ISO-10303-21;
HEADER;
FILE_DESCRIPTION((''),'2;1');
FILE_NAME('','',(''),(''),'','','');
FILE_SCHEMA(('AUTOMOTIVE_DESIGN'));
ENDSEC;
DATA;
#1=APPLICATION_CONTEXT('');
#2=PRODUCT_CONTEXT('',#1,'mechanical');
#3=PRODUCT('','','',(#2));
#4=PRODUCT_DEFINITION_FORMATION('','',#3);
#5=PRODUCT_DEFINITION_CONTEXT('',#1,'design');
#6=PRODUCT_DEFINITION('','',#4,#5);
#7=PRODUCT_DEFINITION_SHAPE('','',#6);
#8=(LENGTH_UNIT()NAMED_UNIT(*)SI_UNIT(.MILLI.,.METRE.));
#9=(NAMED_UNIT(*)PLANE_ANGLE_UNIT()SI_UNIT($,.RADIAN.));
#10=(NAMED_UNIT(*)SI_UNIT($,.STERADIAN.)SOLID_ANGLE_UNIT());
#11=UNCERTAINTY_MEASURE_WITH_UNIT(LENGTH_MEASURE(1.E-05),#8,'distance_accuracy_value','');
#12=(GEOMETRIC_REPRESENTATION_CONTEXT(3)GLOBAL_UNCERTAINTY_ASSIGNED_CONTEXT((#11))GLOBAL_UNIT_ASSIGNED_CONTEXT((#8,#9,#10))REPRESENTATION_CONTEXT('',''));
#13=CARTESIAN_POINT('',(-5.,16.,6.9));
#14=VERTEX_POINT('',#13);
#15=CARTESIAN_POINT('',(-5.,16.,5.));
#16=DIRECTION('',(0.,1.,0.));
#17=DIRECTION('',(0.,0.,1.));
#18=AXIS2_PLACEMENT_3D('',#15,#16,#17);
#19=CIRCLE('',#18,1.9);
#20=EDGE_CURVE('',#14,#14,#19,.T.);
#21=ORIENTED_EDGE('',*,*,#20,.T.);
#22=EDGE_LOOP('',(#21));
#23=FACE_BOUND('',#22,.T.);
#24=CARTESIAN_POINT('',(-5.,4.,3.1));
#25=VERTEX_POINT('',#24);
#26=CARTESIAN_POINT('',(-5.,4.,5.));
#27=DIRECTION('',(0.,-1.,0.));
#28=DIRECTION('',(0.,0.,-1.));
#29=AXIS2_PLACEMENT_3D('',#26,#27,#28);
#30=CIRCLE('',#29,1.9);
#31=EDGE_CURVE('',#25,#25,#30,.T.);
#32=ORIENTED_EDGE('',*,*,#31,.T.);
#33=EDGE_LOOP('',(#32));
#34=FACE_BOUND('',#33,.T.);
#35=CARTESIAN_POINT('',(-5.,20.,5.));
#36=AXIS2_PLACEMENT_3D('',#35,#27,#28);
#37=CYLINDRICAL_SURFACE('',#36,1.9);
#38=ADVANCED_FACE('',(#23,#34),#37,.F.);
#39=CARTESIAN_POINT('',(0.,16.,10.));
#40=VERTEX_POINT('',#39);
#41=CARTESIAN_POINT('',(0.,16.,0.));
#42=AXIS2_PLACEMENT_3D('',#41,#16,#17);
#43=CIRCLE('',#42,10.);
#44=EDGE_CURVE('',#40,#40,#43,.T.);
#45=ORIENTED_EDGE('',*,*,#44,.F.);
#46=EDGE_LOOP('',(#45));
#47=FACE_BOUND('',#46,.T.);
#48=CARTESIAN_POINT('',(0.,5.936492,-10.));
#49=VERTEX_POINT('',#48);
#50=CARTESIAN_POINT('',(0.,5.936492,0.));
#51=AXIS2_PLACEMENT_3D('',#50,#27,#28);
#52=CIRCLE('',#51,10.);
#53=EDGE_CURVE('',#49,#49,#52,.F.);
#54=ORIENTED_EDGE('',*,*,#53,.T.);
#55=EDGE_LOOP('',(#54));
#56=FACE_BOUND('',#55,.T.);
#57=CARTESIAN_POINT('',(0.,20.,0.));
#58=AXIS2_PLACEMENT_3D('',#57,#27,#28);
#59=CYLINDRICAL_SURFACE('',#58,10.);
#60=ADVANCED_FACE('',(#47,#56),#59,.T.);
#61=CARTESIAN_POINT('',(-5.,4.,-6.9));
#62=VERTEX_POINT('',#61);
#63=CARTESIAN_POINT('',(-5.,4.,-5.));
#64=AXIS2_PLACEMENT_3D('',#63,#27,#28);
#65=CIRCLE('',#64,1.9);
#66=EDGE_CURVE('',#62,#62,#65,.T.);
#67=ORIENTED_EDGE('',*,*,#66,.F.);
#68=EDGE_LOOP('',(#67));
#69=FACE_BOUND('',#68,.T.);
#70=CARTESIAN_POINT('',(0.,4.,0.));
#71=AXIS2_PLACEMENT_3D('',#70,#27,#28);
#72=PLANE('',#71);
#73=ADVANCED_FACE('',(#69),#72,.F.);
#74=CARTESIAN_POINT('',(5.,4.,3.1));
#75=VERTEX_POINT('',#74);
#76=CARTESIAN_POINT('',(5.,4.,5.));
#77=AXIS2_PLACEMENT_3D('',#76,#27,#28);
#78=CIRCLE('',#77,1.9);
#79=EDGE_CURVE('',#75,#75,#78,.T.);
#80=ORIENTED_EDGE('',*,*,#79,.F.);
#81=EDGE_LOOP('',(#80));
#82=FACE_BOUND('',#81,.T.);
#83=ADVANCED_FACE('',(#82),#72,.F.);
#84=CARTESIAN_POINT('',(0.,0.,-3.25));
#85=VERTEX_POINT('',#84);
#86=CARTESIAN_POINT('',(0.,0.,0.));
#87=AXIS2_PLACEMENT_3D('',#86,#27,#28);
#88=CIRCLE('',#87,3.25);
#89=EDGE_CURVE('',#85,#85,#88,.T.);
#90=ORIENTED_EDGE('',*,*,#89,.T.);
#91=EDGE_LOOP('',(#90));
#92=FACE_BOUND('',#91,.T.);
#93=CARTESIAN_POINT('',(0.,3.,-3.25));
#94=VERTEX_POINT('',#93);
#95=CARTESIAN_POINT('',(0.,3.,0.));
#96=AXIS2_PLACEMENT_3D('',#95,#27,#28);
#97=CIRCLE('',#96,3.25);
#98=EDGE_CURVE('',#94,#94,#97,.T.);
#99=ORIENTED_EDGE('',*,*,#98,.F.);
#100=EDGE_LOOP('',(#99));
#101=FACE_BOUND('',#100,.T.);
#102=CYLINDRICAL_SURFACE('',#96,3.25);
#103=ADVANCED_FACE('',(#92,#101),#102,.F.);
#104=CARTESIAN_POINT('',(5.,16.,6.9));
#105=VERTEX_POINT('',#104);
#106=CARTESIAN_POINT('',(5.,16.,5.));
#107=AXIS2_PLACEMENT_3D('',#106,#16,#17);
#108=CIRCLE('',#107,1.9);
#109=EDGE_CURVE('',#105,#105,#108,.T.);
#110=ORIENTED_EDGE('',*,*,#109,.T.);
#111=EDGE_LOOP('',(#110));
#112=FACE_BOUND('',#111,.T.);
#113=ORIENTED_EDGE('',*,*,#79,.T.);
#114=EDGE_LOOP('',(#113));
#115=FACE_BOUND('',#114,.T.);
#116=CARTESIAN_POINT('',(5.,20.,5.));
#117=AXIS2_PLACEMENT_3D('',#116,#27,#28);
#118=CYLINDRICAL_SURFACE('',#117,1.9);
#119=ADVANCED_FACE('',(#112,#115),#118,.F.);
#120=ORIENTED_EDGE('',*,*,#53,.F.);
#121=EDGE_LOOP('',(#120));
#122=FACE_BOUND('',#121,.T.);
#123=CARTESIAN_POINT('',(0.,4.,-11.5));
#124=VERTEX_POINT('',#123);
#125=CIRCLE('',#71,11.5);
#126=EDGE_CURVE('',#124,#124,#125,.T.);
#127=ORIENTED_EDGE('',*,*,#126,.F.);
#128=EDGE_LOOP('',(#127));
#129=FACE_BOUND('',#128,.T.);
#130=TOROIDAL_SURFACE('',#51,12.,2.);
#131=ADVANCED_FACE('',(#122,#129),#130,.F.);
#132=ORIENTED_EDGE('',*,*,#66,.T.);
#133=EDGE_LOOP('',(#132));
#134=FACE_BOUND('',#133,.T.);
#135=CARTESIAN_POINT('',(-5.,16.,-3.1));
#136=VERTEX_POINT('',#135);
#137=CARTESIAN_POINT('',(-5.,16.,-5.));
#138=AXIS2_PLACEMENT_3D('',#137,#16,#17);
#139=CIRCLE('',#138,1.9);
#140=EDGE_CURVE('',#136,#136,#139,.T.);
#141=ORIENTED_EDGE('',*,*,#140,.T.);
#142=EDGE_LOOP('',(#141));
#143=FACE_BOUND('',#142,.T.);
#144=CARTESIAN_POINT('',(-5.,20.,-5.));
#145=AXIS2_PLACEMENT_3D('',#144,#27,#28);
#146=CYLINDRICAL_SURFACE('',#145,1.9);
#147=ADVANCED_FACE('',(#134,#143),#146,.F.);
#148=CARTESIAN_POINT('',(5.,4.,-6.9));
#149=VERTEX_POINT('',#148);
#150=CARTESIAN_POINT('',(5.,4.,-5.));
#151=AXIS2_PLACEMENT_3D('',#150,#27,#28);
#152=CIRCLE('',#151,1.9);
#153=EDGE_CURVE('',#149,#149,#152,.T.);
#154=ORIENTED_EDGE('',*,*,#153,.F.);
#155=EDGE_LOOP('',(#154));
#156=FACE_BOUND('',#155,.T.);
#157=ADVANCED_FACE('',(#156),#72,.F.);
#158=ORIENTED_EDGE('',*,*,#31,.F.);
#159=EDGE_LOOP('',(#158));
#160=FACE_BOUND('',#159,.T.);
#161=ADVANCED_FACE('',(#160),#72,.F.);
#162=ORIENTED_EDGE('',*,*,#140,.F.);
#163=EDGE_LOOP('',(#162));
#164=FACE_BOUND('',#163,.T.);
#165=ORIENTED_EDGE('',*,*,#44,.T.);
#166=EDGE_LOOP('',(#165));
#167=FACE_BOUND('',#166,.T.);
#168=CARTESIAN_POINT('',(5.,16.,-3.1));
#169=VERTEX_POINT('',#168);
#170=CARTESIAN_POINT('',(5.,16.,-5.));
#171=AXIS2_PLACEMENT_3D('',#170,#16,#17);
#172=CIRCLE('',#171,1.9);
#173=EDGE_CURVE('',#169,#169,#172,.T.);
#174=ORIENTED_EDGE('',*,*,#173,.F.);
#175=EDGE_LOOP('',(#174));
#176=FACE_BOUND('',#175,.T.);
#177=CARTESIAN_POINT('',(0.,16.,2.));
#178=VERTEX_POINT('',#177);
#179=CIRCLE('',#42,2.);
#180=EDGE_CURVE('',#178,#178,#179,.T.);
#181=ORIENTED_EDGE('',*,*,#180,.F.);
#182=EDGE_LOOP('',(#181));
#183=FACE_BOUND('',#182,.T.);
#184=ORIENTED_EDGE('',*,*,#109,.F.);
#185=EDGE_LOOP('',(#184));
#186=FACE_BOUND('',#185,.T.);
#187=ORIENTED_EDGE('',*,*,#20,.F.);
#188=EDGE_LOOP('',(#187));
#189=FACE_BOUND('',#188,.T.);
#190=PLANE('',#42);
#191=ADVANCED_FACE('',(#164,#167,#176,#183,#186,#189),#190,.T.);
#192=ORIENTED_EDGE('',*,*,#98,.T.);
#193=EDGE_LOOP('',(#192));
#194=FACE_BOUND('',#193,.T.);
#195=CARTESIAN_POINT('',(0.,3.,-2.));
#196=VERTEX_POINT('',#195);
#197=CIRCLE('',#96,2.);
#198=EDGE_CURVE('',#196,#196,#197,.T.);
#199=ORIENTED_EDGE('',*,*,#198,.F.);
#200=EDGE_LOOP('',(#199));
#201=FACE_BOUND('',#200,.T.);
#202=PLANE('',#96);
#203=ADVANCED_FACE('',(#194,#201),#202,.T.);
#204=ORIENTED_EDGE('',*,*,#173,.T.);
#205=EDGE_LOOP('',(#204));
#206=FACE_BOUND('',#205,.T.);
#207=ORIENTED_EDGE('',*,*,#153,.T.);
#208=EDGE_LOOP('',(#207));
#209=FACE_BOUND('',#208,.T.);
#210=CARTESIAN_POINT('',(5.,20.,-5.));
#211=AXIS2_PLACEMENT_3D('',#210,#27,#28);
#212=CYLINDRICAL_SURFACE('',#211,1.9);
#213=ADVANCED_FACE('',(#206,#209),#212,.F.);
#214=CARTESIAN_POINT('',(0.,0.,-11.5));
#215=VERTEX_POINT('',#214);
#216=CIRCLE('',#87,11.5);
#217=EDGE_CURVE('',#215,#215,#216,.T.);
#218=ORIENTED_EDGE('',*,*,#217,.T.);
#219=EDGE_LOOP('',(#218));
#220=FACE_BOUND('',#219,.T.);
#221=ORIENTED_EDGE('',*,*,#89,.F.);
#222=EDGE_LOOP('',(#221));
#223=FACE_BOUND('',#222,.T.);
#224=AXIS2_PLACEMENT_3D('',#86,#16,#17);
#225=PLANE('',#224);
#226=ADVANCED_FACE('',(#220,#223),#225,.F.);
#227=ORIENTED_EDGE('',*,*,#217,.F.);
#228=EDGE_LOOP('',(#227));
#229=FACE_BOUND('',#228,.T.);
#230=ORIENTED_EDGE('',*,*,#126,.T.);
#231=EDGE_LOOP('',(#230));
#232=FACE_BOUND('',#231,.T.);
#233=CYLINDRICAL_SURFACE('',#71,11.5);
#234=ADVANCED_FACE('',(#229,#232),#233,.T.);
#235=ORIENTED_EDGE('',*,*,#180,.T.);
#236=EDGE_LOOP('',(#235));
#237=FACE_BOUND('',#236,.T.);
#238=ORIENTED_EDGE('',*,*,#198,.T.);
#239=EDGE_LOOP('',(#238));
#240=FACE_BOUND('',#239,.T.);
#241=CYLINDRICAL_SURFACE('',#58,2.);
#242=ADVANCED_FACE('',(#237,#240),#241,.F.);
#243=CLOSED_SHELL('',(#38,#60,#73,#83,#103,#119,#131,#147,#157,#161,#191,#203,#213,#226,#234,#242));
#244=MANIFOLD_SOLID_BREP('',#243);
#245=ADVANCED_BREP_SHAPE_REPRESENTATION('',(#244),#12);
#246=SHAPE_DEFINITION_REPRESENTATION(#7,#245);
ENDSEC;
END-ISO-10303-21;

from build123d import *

# Parameters (mm, degrees)
SKETCH_1_R          = 10
SKETCH_1_R_2        = 1.9
SKETCH_1_R_3        = 2
EXTRUDE_6_DEPTH     = 20
SKETCH_12_R         = 11.5
SKETCH_12_R_2       = 3.1
EXTRUDE_8_DEPTH     = 4
SKETCH_13_R         = 3
CUT_EXTRUDE_7_DEPTH = 2
FILLET_3_R          = 2
CUT_EXTRUDE_START   = -4
SKETCH_14_R         = 10
CUT_EXTRUDE_8_DEPTH = 4
SKETCH_15_R         = 3.25
CUT_EXTRUDE_9_DEPTH = 3


with BuildPart() as part:
    # 草图1 → 凸台-拉伸6 (new body)
    with BuildSketch(Plane(origin=(0, 0, 0), x_dir=(1, 0, 0), z_dir=(0, 1, 0))):
        with Locations(Location((0, 0, 0), (0, 0, 270))):
            Circle(SKETCH_1_R)
        with Locations(Location((-5, 5, 0), (0, 0, 270))):
            Circle(SKETCH_1_R_2, mode=Mode.SUBTRACT)
        with Locations(Location((5, 5, 0), (0, 0, 270))):
            Circle(SKETCH_1_R_2, mode=Mode.SUBTRACT)
        with Locations(Location((5, -5, 0), (0, 0, 270))):
            Circle(SKETCH_1_R_2, mode=Mode.SUBTRACT)
        with Locations(Location((-5, -5, 0), (0, 0, 270))):
            Circle(SKETCH_1_R_2, mode=Mode.SUBTRACT)
        with Locations(Location((0, 0, 0), (0, 0, 270))):
            Circle(SKETCH_1_R_3, mode=Mode.SUBTRACT)
    extrude(amount=EXTRUDE_6_DEPTH)

    # 草图12 → 凸台-拉伸8 (add)
    with BuildSketch(Plane.XZ):
        with Locations(Location((0, 0, 0), (0, 0, 270))):
            Circle(SKETCH_12_R)
        Circle(SKETCH_12_R_2, mode=Mode.SUBTRACT)
    extrude(amount=-EXTRUDE_8_DEPTH)

    # 草图13 → 切除-拉伸7 (cut)
    with BuildSketch(Plane.XZ):
        with Locations(Location((0, 0, 0), (0, 0, 270))):
            Circle(SKETCH_13_R)
    extrude(amount=-CUT_EXTRUDE_7_DEPTH, mode=Mode.SUBTRACT)

    # 圆角3
    # the kernel refuses this fillet: 2 mm, written as the material it adds along each edge
    with BuildSketch(Plane(origin=(0, 4, 0), x_dir=(0, 0, 1), z_dir=(1, 0, 0))) as fillet_3_piece_1:
        with BuildLine():
            CenterArc((12, -1.936491673), FILLET_3_R, 104.477512186, 75.522487814)
            Line((10, -1.936491673), (9.96, -1.936491673))
            Line((9.96, -1.936491673), (9.96, 0))
            Line((9.96, 0), (10, 0.04))
            ThreePointArc((10, 0.04), (10.75, 0.04), (11.49, 0.038729833))
            Line((11.49, 0.038729833), (11.5, 0))
        make_face()
    revolve(axis=Axis((0, 4, 0), (0, -1, 0)))

    # 草图14 → 切除-拉伸8 (cut)
    with BuildSketch(Plane(origin=(0, 20, 0), x_dir=(1, 0, 0), z_dir=(0, 1, 0)).offset(CUT_EXTRUDE_START)):
        with Locations(Location((0, 0, 0), (0, 0, 90))):
            Circle(SKETCH_14_R)
    extrude(amount=CUT_EXTRUDE_8_DEPTH, mode=Mode.SUBTRACT)

    # 草图15 → 切除-拉伸9 (cut)
    with BuildSketch(Plane.XZ):
        with Locations(Location((0, 0, 0), (0, 0, 270))):
            Circle(SKETCH_15_R)
    extrude(amount=-CUT_EXTRUDE_9_DEPTH, mode=Mode.SUBTRACT)


solid = part.part
